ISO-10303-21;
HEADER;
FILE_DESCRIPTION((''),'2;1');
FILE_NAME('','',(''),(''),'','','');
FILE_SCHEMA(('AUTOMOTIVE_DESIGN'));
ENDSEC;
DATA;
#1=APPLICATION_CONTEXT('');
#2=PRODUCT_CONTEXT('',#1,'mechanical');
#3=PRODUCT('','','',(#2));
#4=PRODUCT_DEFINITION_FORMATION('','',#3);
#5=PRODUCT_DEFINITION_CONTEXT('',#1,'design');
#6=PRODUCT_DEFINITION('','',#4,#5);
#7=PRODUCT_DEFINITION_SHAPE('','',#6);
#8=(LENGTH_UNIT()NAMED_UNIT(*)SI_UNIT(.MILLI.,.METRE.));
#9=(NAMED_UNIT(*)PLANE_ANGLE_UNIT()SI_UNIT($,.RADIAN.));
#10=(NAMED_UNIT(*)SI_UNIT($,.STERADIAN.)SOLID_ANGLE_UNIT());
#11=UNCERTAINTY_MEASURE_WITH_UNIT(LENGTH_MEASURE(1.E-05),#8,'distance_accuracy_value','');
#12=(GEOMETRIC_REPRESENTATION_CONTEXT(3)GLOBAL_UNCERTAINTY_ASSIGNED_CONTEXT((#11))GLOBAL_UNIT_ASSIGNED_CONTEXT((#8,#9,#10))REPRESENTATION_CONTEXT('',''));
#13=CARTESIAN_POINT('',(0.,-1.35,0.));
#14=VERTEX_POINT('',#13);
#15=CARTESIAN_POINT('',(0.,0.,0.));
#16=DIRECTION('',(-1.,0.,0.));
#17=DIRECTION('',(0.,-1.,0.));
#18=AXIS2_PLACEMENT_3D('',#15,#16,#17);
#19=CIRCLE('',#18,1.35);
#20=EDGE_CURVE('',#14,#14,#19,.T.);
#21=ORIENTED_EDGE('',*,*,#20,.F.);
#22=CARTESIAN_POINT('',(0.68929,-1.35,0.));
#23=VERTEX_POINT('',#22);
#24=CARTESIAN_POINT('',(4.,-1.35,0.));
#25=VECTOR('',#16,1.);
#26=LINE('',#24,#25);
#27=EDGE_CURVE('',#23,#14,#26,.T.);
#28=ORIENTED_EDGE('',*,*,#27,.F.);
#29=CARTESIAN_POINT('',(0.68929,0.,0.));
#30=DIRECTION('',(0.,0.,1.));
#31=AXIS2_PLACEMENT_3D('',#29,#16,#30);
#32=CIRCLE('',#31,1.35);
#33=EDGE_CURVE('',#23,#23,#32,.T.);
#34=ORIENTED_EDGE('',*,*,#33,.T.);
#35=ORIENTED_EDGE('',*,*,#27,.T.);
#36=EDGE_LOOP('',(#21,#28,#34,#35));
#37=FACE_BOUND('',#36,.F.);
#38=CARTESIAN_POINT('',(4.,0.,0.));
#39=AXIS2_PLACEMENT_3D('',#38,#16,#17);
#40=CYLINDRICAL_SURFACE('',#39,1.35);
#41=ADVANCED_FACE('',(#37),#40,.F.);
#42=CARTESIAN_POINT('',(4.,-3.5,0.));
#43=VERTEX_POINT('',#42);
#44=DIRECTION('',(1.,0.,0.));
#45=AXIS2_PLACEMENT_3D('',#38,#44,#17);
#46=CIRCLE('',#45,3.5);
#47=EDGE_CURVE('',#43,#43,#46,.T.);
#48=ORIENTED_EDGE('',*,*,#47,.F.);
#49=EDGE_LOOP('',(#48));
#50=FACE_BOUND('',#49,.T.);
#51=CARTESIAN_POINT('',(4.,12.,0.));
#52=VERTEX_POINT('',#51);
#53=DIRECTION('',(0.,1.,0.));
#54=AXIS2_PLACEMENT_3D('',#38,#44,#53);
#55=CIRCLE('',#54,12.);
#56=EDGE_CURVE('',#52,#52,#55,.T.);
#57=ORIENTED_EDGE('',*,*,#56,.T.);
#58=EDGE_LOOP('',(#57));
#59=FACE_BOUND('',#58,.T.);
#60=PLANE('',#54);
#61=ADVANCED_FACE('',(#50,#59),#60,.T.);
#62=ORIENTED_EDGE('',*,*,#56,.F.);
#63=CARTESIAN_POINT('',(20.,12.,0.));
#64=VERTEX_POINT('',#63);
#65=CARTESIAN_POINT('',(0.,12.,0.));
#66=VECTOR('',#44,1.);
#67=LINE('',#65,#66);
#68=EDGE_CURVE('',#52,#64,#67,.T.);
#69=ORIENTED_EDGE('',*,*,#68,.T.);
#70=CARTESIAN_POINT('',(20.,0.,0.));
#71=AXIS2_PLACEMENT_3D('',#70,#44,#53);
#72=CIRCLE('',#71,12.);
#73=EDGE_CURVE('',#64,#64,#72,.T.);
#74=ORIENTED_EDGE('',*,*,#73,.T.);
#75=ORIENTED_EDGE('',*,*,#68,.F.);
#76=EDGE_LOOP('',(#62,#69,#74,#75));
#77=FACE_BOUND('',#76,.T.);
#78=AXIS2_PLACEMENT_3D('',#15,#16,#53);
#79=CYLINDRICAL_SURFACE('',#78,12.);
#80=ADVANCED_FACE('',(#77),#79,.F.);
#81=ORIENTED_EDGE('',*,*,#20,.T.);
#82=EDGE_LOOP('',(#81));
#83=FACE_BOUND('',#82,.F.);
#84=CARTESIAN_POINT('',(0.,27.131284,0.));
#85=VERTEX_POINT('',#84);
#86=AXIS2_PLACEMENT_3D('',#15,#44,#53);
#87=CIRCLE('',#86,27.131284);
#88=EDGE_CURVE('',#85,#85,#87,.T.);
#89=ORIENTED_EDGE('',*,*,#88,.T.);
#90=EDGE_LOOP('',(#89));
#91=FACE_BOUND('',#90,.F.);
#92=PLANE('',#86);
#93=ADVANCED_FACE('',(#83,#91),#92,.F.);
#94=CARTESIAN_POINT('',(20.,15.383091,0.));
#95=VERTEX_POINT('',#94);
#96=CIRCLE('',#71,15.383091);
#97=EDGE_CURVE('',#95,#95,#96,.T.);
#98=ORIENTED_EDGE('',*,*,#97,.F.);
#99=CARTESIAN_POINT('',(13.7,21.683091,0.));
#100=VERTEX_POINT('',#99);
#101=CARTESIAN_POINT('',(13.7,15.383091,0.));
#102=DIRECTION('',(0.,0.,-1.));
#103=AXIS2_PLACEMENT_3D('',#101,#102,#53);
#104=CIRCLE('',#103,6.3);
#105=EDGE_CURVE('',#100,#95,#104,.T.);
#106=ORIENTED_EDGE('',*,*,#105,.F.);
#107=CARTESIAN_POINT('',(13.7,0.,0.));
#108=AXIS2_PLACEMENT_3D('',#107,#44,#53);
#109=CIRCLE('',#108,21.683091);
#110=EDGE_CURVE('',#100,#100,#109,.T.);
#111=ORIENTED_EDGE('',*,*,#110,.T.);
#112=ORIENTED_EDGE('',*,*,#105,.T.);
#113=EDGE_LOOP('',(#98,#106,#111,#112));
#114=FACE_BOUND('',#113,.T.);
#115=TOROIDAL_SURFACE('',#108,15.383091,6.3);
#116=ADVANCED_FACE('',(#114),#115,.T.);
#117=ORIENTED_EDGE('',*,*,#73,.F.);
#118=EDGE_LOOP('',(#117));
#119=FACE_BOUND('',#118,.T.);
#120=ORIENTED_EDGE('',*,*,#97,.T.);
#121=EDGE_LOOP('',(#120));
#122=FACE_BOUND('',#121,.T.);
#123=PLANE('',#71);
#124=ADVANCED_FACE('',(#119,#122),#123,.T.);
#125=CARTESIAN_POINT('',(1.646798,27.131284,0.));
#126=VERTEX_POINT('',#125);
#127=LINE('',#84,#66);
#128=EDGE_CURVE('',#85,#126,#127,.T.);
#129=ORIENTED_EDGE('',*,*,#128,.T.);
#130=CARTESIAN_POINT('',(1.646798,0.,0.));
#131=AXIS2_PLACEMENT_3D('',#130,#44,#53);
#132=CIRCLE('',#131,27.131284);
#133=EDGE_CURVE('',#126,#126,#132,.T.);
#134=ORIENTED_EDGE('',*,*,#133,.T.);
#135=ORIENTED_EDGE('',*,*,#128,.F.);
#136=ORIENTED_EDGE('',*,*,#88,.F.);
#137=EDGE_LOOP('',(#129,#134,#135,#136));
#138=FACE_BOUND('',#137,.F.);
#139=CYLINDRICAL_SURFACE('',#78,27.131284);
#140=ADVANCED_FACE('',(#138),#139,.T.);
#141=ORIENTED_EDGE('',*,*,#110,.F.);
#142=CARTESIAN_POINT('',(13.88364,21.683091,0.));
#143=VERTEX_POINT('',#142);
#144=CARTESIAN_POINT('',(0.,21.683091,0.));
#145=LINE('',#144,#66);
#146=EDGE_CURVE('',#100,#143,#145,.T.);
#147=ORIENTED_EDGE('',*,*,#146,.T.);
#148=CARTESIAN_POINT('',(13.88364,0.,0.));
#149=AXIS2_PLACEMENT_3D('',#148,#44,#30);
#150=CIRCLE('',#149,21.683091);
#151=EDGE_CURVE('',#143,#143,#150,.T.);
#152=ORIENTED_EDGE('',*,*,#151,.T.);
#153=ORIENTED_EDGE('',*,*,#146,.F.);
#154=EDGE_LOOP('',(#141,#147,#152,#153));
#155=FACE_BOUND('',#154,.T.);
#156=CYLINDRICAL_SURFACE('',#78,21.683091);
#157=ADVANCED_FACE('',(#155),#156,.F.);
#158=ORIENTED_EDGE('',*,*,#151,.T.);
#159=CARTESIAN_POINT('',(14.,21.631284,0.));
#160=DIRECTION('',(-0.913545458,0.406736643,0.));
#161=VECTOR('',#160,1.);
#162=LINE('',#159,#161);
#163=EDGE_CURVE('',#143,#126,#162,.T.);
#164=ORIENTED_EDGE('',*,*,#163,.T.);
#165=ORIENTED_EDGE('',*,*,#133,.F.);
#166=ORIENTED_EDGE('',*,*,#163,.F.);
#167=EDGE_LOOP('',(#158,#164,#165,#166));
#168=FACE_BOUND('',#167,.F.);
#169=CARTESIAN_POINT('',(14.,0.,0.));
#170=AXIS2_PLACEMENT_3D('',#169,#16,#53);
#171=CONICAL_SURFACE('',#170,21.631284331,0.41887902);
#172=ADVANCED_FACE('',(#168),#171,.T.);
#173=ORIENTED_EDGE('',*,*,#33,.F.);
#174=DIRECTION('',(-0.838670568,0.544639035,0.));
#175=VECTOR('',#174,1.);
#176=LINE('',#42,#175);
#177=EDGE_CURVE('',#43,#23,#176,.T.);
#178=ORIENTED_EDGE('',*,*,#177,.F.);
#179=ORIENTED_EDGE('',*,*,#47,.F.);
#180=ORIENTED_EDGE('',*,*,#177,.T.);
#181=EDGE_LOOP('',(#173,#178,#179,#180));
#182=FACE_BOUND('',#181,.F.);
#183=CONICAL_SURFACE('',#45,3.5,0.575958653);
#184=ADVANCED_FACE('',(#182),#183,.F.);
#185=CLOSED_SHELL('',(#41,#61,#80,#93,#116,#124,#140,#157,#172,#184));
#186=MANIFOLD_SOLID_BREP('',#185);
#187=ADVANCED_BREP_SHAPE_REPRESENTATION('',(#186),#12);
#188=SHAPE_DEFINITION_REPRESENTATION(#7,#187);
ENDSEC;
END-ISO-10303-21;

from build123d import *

# Parameters (mm, degrees)
F0_R           = 15.1824843522
F0_R_2         = 12
F1_DEPTH       = 20
F0_R_3         = 21.6830909865
F2_DEPTH       = 20
F3_R           = 6.3
F0_R_4         = 27.1312843312
F4_DEPTH       = 14
F5_S5_R        = 21.6830909865
F5_T6_DEPTH    = 40
F0_R_5         = 1.775
F6_DEPTH       = 4
F8_D           = 2.7
F8_DEPTH       = 12
F8_CSINK_D     = 7
F8_CSINK_ANGLE = 66
F8_TIP         = 0.8111618357


# Not quite as in the source:
# - a fillet or chamfer that OpenCascade refuses, or shapes differently, is made with other operations: its cross-section is extruded or revolved along the edge and cut away or added


with BuildPart() as f1:
    # F0 (on Right) → F1 (new body)
    with BuildSketch(Plane.YZ):
        Circle(F0_R)
        Circle(F0_R_2, mode=Mode.SUBTRACT)
    extrude(amount=F1_DEPTH)

    # F0 (on Right) → F2 (join)
    with BuildSketch(Plane.YZ):
        Circle(F0_R_3)
        Circle(F0_R, mode=Mode.SUBTRACT)
    extrude(amount=F2_DEPTH)

    # F3
    f3_edges = [f1.edges().sort_by_distance(p)[0] for p in [
        (20, -21.683091, 0),
    ]]
    fillet(f3_edges, radius=F3_R)

    # F0 (on Right) → F4 (join)
    with BuildSketch(Plane.YZ):
        Circle(F0_R_4)
        Circle(F0_R_3, mode=Mode.SUBTRACT)
    extrude(amount=F4_DEPTH)

    # F5: chamfer of 5.5 x 12.3532022565 on 1 edges, made by hand


with BuildPart() as f5_tool2:
    # F5_s3 → F5_t4 (revolve)
    with BuildSketch(Plane.XY):
        Polygon((14, 21.6312843312), (1.6467977435, 27.1312843312), (14, 27.1312843312), align=None)
    revolve(axis=Axis((14, 0, 0), (1, 0, 0)))

    # F5_s5 → F5_t6 (cut, symmetric)
    with BuildSketch(Plane.YZ.offset(7.8)):
        Circle(F5_S5_R)
    extrude(amount=F5_T6_DEPTH, both=True, mode=Mode.SUBTRACT)


with BuildPart() as f1_1:
    add(f1.part)

    # F5_t1: cut F5_tool2
    add(f5_tool2.part, mode=Mode.SUBTRACT)

    # F0 (on Right) → F6 (join)
    with BuildSketch(Plane.YZ):
        Circle(F0_R_2)
        Circle(F0_R_5, mode=Mode.SUBTRACT)
        Circle(F0_R_5)
    extrude(amount=F6_DEPTH)

    # F8
    with Locations(Plane.YZ.offset(4)):
        with Locations((0, 0)):
            CounterSinkHole(F8_D / 2, F8_CSINK_D / 2, depth=F8_DEPTH, counter_sink_angle=F8_CSINK_ANGLE)
            with Locations((0, 0, -(F8_DEPTH + F8_TIP / 2))):  # 118° drill point
                Cone(0, F8_D / 2, F8_TIP, mode=Mode.SUBTRACT)


solid = f1_1.part
